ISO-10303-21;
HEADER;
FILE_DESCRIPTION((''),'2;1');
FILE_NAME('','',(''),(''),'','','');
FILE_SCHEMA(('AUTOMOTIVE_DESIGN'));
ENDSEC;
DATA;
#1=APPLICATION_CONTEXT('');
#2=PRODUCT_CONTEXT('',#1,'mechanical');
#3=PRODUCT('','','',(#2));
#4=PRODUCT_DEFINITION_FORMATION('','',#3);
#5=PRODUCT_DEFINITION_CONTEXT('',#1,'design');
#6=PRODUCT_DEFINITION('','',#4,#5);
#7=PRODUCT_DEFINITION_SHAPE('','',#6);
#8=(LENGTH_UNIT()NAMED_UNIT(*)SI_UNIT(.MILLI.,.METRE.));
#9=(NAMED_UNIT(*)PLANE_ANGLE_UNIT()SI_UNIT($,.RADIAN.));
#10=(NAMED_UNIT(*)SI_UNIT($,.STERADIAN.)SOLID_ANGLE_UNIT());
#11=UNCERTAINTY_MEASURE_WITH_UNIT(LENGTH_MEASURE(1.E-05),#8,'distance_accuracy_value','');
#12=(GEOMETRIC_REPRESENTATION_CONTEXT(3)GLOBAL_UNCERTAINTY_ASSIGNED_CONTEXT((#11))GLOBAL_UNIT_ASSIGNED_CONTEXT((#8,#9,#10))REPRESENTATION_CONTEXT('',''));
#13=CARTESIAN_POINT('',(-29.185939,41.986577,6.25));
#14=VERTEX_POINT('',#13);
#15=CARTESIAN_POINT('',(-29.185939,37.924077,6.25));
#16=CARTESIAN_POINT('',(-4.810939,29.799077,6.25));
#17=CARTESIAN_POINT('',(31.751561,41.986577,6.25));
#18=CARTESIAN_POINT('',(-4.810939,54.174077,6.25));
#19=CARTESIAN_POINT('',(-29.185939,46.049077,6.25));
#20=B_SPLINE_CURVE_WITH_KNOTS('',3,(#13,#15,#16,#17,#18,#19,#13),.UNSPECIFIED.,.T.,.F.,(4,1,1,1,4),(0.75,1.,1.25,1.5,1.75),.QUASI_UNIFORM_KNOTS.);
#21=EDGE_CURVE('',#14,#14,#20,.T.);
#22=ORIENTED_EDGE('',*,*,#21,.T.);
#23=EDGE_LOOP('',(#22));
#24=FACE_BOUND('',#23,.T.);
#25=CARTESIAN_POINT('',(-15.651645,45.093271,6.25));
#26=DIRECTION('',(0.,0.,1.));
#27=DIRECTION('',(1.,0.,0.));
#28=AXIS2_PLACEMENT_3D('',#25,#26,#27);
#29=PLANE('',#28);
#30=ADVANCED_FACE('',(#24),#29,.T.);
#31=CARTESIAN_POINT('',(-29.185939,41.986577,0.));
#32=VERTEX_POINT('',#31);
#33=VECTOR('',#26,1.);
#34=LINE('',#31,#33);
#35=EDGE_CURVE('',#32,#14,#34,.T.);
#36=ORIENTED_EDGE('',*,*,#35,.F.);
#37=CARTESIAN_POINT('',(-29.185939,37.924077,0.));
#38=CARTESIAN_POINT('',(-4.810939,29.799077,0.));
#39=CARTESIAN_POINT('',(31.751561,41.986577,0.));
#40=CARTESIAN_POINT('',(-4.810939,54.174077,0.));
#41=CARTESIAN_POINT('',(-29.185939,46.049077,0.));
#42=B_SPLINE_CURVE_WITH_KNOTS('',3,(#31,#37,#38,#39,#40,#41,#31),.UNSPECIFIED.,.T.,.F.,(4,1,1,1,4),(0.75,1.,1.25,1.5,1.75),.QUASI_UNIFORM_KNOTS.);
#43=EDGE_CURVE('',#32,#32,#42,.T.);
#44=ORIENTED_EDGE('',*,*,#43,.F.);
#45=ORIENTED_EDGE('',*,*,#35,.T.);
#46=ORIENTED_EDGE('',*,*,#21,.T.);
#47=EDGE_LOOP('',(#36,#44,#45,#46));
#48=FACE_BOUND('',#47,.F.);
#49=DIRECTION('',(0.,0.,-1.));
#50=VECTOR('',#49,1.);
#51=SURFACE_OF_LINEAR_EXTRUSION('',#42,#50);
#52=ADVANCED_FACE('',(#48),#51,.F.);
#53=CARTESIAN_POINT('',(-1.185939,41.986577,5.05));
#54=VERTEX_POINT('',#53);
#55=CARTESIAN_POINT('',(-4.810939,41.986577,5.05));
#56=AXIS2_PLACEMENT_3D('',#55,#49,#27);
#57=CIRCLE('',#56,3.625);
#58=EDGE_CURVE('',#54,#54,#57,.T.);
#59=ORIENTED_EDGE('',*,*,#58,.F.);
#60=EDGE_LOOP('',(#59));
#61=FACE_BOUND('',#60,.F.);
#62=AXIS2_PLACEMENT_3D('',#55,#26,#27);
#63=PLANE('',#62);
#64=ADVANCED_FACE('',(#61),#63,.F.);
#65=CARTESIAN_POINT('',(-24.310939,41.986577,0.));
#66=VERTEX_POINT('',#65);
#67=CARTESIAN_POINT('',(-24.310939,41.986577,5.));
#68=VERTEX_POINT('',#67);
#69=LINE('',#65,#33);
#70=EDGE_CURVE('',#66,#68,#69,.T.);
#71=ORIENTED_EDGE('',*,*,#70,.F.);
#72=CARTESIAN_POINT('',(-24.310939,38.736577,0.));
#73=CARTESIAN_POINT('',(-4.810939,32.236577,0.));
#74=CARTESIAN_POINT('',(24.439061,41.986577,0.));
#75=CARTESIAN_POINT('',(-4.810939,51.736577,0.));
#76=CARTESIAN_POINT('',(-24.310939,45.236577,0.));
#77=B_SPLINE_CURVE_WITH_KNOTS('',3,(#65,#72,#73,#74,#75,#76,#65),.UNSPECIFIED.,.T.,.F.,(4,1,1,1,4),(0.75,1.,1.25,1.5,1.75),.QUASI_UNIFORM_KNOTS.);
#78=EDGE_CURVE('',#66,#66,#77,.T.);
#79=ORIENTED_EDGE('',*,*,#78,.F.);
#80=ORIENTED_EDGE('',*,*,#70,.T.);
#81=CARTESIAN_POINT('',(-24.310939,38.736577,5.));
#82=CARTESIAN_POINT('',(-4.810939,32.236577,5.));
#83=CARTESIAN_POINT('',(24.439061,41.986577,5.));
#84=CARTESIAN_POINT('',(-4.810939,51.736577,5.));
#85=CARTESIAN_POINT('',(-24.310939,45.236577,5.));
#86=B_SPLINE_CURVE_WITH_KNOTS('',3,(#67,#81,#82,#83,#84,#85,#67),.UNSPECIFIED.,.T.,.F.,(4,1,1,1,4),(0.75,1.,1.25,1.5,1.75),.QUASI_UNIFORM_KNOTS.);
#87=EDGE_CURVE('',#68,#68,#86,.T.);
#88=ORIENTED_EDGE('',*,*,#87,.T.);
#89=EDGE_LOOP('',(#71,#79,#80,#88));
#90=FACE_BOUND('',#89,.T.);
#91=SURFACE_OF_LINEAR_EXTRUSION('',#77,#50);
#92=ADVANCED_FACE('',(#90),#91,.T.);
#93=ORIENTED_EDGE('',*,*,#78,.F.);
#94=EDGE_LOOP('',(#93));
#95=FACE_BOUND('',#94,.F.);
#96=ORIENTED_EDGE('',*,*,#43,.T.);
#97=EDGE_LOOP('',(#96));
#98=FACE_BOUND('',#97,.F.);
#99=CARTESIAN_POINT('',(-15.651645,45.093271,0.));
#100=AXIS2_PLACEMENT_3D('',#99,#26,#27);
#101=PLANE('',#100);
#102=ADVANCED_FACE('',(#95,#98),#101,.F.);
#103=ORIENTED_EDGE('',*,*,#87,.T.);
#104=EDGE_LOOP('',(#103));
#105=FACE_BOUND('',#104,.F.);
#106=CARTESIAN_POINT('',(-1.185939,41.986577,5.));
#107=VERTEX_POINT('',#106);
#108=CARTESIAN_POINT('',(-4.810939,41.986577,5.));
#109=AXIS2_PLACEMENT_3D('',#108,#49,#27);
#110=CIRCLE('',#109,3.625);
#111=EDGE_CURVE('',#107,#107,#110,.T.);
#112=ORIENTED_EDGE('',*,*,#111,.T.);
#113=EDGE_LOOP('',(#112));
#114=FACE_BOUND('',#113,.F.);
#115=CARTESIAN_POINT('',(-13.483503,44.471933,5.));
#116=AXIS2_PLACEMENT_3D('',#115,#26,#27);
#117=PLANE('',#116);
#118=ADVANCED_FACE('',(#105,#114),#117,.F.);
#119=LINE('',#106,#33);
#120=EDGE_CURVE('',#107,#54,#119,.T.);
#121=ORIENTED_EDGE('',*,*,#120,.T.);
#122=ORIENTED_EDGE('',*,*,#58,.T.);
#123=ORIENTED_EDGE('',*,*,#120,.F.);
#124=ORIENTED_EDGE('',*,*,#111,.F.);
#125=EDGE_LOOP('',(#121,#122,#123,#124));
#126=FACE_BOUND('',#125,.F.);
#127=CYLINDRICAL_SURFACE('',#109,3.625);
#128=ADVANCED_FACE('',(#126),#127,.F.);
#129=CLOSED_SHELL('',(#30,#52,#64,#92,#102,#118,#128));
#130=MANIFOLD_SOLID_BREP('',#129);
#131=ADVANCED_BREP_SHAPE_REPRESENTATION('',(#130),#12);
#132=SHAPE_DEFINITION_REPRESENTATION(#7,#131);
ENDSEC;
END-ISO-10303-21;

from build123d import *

# Parameters (mm, degrees)
F1_DEPTH  = 5
F2_SCALE  = 1.25
F11_R     = 3.625
F13_DEPTH = 3.25
F15_R     = 4.297586673
F16_DEPTH = 1.2


# Not quite as in the source:
# - a feature of the source that left no trace in its solid (it failed there, or was rolled back) is left out


with BuildPart() as f1:
    # F0 (on Top) → F1 (new body)
    with BuildSketch(Plane.XY):
        with BuildLine():
            Line((-19.5, 0), (0, 0))
            Line((0, 0), (0, 6.5))
            add(Edge.make_bspline(
                [(-19.5, 0), (-19.5, 3.25), (-9.75, 6.5), (0, 6.5)],
                knots=[0, 0, 0, 0, 0.25, 0.25, 0.25, 0.25], degree=3))
        make_face()
        with BuildLine():
            Line((0, 6.5), (0, 0))
            Line((0, 0), (19.5, 0))
            add(Edge.make_bspline(
                [(0, 6.5), (9.75, 6.5), (19.5, 3.25), (19.5, 0)],
                knots=[0.25, 0.25, 0.25, 0.25, 0.5, 0.5, 0.5, 0.5], degree=3))
        make_face()
        with BuildLine():
            Line((19.5, 0), (0, 0))
            Line((0, 0), (0, -6.5))
            add(Edge.make_bspline(
                [(19.5, 0), (19.5, -3.25), (9.75, -6.5), (0, -6.5)],
                knots=[0.5, 0.5, 0.5, 0.5, 0.75, 0.75, 0.75, 0.75], degree=3))
        make_face()
        with BuildLine():
            Line((0, -6.5), (0, 0))
            Line((0, 0), (-19.5, 0))
            add(Edge.make_bspline(
                [(0, -6.5), (-9.75, -6.5), (-19.5, -3.25), (-19.5, 0)],
                knots=[0.75, 0.75, 0.75, 0.75, 1, 1, 1, 1], degree=3))
        make_face()
    extrude(amount=F1_DEPTH)


with BuildPart() as f2_1:
    # F2: copy of F1
    add(f1.part.scale(F2_SCALE))

    # F5: cut F1
    add(f1.part, mode=Mode.SUBTRACT)

    # F11 (on face) → F13 (cut)
    with BuildSketch(Plane(origin=(0, 0, 5), x_dir=(1, 0, 0), z_dir=(0, 0, -1))):
        Circle(F11_R)
    extrude(amount=-F13_DEPTH, mode=Mode.SUBTRACT)


with BuildPart() as f14_1:
    # F14: copy of F2_1
    add(f2_1.part.moved(Location((-4.8109386116, 41.9865772128, 0))))

    # F15 (on face) → F16 (join)
    with BuildSketch(Plane.XY.offset(6.25)):
        with Locations((-4.8109386116, 41.9865772128)):
            Circle(F15_R)
    extrude(amount=-F16_DEPTH)


with BuildPart() as f17_1:
    # F17: copy of F14_1
    add(f14_1.part)


solid = f14_1.part
